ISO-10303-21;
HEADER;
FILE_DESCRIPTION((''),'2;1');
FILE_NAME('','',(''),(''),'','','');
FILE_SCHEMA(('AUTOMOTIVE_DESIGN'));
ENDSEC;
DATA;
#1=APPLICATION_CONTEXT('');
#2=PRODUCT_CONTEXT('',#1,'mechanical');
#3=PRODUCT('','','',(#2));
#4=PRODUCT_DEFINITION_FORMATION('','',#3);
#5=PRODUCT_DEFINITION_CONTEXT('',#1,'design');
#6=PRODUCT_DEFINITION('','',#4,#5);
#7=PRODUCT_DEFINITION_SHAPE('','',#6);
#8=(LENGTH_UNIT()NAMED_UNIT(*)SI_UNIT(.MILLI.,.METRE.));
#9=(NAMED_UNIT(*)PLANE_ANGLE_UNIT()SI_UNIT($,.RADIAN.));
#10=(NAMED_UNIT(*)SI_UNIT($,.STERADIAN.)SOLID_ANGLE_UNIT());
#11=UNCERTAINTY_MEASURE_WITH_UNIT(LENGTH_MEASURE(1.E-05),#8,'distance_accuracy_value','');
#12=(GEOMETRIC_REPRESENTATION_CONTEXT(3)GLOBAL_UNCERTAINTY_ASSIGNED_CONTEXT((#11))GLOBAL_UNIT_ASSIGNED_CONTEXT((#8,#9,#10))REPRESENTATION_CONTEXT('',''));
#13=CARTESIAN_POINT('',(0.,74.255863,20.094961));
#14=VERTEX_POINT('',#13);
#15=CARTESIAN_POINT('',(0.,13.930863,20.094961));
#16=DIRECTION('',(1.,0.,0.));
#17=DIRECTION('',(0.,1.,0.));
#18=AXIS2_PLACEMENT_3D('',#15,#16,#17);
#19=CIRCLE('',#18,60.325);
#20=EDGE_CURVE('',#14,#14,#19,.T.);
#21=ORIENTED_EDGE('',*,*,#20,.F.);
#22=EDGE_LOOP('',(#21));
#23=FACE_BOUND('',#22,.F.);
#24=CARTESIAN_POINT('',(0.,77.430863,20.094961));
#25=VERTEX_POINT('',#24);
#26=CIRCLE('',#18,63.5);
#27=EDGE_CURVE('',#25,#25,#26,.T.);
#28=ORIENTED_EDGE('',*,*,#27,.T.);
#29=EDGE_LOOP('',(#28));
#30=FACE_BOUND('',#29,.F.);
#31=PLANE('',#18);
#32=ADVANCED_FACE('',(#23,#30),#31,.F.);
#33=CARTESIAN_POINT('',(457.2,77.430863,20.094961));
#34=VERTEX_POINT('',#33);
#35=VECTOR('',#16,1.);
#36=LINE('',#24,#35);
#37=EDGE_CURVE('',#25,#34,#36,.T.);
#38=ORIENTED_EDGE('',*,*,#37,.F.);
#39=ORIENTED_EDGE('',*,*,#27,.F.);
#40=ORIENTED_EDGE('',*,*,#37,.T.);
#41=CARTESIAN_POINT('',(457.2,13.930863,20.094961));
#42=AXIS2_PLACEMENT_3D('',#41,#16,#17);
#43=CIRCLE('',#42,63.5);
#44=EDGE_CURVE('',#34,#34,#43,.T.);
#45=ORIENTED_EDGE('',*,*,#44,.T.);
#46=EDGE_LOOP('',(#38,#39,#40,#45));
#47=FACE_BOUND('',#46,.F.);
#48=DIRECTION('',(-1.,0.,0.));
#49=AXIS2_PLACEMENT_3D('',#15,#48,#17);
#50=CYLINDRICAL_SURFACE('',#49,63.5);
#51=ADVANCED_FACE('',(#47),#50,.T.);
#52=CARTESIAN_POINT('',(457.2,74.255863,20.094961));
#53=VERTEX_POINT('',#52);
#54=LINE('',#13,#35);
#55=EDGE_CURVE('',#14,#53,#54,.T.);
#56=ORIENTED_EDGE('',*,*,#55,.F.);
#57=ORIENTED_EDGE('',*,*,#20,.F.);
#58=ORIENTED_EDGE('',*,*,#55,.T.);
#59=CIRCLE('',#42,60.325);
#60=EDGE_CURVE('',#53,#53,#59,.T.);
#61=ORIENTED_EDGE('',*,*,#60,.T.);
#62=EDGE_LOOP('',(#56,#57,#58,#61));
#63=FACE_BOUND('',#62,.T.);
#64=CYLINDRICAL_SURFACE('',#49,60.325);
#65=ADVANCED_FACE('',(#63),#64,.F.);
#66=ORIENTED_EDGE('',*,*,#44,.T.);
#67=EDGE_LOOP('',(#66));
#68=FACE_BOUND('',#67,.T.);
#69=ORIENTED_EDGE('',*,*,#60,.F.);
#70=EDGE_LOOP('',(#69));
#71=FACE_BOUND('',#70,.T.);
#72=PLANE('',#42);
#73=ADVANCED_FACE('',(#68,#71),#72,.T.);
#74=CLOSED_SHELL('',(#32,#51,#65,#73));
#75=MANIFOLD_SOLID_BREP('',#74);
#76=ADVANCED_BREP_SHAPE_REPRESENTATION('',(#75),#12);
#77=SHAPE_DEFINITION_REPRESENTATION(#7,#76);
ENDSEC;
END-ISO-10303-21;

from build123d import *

# Parameters (mm, degrees)
F1_R     = 63.5
F1_R_2   = 60.325
F2_DEPTH = 457.2


# Not quite as in the source:
# - a variable given as a bare number and used for a length is read in inches; the dataset says mm whatever the document's units were


with BuildPart() as f2:
    # F1 (on Right) → F2 (new body)
    with BuildSketch(Plane.YZ):
        with Locations((13.9308627695, 20.094960928)):
            Circle(F1_R)
        with Locations((13.9308627695, 20.094960928)):
            Circle(F1_R_2, mode=Mode.SUBTRACT)
    extrude(amount=F2_DEPTH)


solid = f2.part
